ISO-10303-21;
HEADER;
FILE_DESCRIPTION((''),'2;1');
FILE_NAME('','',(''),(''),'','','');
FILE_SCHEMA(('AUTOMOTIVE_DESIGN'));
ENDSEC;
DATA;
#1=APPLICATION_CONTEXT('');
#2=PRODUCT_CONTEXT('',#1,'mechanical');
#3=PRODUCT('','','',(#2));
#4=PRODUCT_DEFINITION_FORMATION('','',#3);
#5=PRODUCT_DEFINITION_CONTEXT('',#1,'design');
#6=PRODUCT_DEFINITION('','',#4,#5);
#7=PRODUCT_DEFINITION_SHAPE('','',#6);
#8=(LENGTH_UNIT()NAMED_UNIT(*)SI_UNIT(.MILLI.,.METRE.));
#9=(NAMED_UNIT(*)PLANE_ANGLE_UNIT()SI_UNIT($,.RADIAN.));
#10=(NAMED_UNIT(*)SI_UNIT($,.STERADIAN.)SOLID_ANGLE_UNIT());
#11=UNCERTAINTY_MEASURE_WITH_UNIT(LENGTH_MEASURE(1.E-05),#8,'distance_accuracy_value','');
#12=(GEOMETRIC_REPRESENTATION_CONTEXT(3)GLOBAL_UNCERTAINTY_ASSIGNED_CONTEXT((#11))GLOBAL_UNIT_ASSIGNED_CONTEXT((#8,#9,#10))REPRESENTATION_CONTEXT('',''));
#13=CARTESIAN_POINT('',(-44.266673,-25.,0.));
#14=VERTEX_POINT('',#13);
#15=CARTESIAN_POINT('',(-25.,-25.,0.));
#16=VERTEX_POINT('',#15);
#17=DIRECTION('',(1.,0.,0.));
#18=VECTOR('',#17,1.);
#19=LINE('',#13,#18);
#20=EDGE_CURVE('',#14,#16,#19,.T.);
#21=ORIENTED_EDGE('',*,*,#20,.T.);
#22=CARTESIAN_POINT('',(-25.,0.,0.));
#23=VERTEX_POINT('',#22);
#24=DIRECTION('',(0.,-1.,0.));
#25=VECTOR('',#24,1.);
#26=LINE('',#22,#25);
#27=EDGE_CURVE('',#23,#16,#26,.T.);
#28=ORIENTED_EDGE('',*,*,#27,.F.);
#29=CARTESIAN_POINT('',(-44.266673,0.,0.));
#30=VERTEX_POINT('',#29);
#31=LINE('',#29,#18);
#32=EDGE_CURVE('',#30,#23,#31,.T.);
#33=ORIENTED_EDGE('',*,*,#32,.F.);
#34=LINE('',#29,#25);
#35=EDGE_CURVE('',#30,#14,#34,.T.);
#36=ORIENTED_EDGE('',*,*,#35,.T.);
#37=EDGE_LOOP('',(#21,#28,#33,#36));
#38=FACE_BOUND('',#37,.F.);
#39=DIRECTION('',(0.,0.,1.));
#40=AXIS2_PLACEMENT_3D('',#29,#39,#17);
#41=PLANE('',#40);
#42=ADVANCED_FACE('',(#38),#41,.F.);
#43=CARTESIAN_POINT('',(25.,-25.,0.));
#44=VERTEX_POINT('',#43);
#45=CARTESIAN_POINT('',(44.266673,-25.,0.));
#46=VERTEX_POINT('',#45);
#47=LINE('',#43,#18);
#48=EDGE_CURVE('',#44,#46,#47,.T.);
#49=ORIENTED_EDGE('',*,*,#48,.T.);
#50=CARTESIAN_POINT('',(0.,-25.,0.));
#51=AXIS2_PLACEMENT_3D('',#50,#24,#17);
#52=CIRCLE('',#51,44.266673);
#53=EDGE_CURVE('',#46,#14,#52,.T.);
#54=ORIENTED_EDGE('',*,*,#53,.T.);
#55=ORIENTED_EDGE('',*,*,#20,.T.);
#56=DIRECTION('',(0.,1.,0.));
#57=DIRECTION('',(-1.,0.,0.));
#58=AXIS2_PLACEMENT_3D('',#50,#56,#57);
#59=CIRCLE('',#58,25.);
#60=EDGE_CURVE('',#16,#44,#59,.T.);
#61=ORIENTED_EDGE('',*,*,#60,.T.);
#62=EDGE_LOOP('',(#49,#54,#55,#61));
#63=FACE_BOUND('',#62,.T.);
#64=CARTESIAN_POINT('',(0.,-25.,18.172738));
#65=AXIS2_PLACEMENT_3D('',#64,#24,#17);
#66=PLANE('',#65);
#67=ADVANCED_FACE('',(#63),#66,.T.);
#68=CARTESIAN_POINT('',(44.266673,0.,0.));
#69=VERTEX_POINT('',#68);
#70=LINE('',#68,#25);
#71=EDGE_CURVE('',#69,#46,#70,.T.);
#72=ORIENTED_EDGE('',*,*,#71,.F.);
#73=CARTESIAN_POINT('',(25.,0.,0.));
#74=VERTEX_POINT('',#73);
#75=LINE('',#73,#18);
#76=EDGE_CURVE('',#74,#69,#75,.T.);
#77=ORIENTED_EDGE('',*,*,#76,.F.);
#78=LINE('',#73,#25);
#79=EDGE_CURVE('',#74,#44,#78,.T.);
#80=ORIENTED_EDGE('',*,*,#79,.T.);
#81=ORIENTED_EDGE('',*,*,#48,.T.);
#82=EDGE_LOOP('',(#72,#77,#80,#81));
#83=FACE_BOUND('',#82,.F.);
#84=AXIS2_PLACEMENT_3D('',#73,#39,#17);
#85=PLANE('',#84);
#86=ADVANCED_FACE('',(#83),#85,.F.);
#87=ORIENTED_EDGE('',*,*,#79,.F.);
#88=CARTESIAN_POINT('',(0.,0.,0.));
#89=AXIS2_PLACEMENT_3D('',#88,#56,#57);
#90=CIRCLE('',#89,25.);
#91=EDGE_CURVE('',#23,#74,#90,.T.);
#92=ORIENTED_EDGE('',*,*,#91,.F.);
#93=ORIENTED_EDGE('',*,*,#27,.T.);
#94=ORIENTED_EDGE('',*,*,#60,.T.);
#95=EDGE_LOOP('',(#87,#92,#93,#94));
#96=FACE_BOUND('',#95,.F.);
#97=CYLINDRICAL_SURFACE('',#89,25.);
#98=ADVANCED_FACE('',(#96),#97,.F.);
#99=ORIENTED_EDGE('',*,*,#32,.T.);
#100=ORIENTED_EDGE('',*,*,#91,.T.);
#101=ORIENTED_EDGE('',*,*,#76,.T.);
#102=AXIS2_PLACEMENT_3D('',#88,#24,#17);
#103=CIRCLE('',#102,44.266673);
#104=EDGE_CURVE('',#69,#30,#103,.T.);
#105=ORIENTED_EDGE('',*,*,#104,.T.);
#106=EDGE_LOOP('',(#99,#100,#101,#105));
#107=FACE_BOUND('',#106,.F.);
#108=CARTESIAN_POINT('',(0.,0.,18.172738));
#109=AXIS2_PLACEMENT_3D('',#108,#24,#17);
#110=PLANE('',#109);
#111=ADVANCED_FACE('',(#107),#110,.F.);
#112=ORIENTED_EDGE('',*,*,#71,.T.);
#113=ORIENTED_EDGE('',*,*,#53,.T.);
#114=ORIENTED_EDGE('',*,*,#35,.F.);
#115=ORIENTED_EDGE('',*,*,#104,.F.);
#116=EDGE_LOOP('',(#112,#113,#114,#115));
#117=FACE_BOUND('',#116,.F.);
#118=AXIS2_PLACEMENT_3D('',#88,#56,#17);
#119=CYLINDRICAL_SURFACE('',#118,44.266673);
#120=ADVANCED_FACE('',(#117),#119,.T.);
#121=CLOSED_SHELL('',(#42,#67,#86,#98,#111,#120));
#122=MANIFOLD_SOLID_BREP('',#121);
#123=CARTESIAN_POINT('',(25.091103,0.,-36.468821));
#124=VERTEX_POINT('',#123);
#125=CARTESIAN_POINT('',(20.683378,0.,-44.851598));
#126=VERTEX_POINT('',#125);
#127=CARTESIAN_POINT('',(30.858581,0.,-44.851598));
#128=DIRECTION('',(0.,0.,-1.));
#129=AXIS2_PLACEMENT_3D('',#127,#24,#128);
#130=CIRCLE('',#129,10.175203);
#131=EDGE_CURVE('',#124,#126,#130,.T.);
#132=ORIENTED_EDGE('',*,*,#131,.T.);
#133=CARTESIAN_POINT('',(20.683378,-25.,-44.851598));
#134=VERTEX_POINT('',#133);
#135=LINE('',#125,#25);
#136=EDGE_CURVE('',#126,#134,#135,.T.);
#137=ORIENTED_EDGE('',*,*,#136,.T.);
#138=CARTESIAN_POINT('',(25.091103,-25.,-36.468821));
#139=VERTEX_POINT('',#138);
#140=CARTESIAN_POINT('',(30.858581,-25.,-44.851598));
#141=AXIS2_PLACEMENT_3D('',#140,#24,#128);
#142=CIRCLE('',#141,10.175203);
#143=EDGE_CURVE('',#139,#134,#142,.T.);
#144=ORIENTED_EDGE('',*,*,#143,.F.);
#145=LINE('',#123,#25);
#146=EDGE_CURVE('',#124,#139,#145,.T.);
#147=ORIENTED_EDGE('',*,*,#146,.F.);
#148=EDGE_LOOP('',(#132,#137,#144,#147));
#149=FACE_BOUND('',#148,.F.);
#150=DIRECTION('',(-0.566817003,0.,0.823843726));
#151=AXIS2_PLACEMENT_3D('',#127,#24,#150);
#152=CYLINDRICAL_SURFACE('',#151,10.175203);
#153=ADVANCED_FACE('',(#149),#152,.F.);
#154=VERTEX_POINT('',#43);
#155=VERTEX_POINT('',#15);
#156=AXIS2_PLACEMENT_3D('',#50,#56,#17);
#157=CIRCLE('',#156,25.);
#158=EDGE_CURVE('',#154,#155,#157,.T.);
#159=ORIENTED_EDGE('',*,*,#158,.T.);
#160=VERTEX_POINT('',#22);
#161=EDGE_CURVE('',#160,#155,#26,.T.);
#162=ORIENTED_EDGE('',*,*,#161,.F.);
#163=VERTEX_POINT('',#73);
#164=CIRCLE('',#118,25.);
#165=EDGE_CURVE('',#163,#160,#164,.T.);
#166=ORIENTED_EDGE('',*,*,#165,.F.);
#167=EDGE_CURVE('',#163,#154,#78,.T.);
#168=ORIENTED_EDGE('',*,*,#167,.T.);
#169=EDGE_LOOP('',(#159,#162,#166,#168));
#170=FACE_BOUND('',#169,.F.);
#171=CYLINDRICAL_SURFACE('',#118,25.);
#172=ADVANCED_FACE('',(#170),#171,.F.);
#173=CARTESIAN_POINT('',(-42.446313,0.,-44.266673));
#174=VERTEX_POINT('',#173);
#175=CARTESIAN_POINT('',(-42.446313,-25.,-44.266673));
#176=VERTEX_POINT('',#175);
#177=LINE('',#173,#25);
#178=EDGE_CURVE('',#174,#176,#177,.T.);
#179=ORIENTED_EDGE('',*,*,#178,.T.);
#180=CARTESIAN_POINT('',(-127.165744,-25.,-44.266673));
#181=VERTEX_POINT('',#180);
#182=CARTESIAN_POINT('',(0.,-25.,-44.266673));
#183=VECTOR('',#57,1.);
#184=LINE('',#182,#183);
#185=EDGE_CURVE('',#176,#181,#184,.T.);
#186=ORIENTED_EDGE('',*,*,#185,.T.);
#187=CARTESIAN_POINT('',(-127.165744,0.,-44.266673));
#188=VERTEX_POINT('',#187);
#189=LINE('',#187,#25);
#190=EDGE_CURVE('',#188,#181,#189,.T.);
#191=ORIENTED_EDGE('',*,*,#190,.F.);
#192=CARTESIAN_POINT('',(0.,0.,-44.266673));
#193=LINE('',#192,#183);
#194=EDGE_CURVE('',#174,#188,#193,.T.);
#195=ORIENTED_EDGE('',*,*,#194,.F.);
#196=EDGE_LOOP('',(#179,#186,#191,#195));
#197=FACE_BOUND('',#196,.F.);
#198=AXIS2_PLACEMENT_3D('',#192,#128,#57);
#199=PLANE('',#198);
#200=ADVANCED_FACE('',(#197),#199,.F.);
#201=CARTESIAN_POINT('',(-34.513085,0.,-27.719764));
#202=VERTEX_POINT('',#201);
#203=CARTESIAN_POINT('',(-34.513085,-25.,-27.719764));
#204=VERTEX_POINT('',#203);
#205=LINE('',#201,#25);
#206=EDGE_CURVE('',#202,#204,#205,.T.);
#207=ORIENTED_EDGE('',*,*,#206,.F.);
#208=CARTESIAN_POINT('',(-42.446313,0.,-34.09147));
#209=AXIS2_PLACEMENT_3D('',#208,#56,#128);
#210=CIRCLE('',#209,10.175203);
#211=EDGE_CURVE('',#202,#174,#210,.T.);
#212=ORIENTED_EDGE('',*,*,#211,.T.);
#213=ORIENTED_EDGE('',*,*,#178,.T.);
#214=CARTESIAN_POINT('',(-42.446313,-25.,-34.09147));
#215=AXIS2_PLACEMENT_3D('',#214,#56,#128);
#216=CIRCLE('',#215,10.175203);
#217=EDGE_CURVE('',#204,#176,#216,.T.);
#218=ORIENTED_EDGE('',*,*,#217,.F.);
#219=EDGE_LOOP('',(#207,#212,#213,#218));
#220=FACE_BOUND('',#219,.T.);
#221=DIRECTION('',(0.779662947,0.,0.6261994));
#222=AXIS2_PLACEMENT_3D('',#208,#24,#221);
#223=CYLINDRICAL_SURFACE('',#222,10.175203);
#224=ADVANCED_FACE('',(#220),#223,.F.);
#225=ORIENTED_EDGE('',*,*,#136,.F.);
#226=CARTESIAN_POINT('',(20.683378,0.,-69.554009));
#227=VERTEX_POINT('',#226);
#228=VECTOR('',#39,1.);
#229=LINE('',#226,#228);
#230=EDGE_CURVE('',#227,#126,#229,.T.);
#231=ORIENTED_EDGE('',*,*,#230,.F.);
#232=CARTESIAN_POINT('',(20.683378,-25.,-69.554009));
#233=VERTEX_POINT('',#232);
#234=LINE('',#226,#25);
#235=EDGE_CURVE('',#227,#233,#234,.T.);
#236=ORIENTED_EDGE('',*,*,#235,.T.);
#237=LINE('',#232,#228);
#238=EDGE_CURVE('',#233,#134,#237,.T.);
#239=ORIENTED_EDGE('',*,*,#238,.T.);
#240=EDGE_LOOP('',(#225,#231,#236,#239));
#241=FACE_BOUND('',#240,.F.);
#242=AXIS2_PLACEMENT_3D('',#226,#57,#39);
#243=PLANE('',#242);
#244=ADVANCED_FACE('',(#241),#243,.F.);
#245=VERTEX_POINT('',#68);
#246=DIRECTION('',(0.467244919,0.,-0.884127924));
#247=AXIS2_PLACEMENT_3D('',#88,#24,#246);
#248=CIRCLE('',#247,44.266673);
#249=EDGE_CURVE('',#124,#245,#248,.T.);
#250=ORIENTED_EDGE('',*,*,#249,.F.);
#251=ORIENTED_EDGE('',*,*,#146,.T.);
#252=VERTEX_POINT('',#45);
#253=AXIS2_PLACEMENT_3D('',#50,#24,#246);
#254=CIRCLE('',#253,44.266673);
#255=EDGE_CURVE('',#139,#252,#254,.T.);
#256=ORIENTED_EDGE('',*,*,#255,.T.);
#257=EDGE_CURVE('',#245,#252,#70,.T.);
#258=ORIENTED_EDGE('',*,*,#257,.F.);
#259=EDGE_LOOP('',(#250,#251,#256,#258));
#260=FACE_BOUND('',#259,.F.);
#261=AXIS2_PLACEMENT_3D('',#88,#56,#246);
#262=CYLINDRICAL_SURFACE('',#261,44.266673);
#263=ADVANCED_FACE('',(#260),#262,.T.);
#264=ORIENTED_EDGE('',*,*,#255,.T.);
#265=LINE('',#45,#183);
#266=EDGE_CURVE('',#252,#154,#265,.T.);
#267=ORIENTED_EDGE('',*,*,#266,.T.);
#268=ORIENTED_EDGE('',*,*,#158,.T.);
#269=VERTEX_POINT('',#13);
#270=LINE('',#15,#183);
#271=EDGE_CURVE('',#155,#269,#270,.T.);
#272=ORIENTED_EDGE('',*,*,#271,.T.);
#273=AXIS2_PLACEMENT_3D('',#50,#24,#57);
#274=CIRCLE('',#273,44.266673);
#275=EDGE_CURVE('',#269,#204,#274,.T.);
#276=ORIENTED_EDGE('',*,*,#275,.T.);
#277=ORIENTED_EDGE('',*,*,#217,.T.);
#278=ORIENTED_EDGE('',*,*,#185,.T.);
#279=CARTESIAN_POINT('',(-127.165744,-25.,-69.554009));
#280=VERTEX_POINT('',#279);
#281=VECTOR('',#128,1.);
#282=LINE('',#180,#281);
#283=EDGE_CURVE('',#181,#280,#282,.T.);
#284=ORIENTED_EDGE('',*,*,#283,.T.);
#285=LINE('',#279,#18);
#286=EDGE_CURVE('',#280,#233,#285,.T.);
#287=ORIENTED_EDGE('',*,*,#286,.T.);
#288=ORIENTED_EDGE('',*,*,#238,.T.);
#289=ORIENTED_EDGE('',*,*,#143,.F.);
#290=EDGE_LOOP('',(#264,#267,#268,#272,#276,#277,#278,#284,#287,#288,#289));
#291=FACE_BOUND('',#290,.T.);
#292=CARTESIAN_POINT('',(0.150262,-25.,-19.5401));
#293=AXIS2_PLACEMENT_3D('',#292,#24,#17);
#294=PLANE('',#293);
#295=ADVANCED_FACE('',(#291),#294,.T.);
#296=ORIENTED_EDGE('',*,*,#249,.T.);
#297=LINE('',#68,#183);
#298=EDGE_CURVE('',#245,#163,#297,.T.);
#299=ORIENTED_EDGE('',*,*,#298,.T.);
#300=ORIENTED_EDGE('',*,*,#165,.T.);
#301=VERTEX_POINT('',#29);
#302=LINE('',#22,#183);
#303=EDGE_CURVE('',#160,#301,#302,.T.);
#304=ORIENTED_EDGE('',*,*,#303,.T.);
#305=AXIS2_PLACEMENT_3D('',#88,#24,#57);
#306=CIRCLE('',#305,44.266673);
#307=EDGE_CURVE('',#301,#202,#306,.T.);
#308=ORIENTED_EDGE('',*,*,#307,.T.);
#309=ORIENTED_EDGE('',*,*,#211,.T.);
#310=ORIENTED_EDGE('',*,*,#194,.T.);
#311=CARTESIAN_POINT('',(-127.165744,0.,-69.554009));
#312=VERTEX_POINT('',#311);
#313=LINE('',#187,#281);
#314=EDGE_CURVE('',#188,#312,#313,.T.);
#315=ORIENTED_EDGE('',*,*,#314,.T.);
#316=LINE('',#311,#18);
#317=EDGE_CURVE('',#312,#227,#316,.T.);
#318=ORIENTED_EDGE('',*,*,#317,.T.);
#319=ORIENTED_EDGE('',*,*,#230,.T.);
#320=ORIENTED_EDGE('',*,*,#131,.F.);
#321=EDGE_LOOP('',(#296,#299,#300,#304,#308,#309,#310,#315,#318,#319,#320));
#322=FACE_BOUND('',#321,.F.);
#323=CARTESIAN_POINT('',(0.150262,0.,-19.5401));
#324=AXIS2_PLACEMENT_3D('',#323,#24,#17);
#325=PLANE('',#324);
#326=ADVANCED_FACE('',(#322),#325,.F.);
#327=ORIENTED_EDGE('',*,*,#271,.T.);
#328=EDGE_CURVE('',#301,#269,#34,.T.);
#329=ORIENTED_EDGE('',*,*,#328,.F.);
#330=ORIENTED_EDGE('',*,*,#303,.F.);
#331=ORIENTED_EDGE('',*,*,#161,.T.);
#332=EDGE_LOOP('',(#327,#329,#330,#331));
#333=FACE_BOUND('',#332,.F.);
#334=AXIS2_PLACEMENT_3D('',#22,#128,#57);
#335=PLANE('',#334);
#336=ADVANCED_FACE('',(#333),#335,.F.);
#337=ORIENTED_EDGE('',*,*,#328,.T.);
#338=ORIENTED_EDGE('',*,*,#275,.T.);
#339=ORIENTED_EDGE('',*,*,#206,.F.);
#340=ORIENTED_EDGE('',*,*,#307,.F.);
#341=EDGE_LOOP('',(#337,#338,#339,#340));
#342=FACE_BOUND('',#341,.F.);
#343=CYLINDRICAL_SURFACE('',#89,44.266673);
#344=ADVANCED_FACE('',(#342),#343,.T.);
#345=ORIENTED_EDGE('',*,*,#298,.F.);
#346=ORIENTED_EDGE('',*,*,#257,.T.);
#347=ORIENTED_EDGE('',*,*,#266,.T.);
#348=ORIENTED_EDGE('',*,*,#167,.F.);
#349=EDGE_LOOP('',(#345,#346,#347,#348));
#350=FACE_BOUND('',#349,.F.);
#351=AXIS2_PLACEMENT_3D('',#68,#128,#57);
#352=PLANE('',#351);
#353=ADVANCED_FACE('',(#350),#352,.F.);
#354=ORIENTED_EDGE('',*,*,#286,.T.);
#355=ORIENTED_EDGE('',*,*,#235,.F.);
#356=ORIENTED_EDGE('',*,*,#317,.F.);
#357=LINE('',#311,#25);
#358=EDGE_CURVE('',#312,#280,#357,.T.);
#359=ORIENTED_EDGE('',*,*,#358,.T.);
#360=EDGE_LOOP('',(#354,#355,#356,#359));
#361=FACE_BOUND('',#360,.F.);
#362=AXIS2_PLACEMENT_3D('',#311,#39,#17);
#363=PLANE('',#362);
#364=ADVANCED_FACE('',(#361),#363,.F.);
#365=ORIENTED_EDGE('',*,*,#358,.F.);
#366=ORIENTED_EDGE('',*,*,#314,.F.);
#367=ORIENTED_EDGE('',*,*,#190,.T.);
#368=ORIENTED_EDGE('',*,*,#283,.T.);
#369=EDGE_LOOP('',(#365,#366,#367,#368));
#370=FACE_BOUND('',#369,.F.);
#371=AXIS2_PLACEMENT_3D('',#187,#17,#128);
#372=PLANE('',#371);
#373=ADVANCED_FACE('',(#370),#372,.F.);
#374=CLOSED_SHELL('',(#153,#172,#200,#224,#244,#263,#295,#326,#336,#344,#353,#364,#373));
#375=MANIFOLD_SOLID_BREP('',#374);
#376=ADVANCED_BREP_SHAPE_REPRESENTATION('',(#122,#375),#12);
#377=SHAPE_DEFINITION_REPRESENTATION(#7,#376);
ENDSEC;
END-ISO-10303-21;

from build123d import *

# Parameters (mm, degrees)
F1_DEPTH = 25
F2_DEPTH = 25
F3_R     = 10.1752029192


# Not quite as in the source:
# - a feature names something its author has since deleted; it is built from what else it names


with BuildPart() as f1:
    # F0 (on Front) → F1 (new body)
    with BuildSketch(Plane.XZ):
        with BuildLine():
            Line((20.6833779812, -69.5540085435), (20.6833779812, -39.1374016096))
            ThreePointArc((20.6833779812, -39.1374016096), (10.6549466055, -42.9652236384), (0, -44.2666728981))
            Line((0, -44.2666728981), (-127.1657443379, -44.2666728981))
            Line((-127.1657443379, -44.2666728981), (-127.1657443379, -69.5540085435))
            Line((-127.1657443379, -69.5540085435), (20.6833779812, -69.5540085435))
        make_face()
    extrude(amount=F1_DEPTH)

    # F0 (on Front) → F2 (join)
    with BuildSketch(Plane.XZ):
        with BuildLine():
            Line((44.2666728981, 0), (25, 0))
            ThreePointArc((25, 0), (0, -25), (-25, 0))
            Line((-25, 0), (-44.2666728981, 0))
            ThreePointArc((-44.2666728981, 0), (-31.3012645868, -31.3012645868), (0, -44.2666728981))
            ThreePointArc((0, -44.2666728981), (10.6549466055, -42.9652236384), (20.6833779812, -39.1374016096))
            ThreePointArc((20.6833779812, -39.1374016096), (37.9151859879, -22.846815992), (44.2666728981, 0))
        make_face()
    extrude(amount=F2_DEPTH)

    # F3
    f3_edges = [f1.edges().sort_by_distance(p)[0] for p in [
        (0, -12.5, -44.266673),
        (20.683378, -12.5, -39.137402),
    ]]
    fillet(f3_edges, radius=F3_R)


with BuildPart() as f1b:
    # F0 (on Front) → F1, piece 2 (new body)
    with BuildSketch(Plane.XZ):
        with BuildLine():
            ThreePointArc((-25, 0), (0, 25), (25, 0))
            Line((25, 0), (44.2666728981, 0))
            ThreePointArc((44.2666728981, 0), (0, 44.2666728981), (-44.2666728981, 0))
            Line((-44.2666728981, 0), (-25, 0))
        make_face()
    extrude(amount=F1_DEPTH)


solid = Compound([f1.part, f1b.part])
